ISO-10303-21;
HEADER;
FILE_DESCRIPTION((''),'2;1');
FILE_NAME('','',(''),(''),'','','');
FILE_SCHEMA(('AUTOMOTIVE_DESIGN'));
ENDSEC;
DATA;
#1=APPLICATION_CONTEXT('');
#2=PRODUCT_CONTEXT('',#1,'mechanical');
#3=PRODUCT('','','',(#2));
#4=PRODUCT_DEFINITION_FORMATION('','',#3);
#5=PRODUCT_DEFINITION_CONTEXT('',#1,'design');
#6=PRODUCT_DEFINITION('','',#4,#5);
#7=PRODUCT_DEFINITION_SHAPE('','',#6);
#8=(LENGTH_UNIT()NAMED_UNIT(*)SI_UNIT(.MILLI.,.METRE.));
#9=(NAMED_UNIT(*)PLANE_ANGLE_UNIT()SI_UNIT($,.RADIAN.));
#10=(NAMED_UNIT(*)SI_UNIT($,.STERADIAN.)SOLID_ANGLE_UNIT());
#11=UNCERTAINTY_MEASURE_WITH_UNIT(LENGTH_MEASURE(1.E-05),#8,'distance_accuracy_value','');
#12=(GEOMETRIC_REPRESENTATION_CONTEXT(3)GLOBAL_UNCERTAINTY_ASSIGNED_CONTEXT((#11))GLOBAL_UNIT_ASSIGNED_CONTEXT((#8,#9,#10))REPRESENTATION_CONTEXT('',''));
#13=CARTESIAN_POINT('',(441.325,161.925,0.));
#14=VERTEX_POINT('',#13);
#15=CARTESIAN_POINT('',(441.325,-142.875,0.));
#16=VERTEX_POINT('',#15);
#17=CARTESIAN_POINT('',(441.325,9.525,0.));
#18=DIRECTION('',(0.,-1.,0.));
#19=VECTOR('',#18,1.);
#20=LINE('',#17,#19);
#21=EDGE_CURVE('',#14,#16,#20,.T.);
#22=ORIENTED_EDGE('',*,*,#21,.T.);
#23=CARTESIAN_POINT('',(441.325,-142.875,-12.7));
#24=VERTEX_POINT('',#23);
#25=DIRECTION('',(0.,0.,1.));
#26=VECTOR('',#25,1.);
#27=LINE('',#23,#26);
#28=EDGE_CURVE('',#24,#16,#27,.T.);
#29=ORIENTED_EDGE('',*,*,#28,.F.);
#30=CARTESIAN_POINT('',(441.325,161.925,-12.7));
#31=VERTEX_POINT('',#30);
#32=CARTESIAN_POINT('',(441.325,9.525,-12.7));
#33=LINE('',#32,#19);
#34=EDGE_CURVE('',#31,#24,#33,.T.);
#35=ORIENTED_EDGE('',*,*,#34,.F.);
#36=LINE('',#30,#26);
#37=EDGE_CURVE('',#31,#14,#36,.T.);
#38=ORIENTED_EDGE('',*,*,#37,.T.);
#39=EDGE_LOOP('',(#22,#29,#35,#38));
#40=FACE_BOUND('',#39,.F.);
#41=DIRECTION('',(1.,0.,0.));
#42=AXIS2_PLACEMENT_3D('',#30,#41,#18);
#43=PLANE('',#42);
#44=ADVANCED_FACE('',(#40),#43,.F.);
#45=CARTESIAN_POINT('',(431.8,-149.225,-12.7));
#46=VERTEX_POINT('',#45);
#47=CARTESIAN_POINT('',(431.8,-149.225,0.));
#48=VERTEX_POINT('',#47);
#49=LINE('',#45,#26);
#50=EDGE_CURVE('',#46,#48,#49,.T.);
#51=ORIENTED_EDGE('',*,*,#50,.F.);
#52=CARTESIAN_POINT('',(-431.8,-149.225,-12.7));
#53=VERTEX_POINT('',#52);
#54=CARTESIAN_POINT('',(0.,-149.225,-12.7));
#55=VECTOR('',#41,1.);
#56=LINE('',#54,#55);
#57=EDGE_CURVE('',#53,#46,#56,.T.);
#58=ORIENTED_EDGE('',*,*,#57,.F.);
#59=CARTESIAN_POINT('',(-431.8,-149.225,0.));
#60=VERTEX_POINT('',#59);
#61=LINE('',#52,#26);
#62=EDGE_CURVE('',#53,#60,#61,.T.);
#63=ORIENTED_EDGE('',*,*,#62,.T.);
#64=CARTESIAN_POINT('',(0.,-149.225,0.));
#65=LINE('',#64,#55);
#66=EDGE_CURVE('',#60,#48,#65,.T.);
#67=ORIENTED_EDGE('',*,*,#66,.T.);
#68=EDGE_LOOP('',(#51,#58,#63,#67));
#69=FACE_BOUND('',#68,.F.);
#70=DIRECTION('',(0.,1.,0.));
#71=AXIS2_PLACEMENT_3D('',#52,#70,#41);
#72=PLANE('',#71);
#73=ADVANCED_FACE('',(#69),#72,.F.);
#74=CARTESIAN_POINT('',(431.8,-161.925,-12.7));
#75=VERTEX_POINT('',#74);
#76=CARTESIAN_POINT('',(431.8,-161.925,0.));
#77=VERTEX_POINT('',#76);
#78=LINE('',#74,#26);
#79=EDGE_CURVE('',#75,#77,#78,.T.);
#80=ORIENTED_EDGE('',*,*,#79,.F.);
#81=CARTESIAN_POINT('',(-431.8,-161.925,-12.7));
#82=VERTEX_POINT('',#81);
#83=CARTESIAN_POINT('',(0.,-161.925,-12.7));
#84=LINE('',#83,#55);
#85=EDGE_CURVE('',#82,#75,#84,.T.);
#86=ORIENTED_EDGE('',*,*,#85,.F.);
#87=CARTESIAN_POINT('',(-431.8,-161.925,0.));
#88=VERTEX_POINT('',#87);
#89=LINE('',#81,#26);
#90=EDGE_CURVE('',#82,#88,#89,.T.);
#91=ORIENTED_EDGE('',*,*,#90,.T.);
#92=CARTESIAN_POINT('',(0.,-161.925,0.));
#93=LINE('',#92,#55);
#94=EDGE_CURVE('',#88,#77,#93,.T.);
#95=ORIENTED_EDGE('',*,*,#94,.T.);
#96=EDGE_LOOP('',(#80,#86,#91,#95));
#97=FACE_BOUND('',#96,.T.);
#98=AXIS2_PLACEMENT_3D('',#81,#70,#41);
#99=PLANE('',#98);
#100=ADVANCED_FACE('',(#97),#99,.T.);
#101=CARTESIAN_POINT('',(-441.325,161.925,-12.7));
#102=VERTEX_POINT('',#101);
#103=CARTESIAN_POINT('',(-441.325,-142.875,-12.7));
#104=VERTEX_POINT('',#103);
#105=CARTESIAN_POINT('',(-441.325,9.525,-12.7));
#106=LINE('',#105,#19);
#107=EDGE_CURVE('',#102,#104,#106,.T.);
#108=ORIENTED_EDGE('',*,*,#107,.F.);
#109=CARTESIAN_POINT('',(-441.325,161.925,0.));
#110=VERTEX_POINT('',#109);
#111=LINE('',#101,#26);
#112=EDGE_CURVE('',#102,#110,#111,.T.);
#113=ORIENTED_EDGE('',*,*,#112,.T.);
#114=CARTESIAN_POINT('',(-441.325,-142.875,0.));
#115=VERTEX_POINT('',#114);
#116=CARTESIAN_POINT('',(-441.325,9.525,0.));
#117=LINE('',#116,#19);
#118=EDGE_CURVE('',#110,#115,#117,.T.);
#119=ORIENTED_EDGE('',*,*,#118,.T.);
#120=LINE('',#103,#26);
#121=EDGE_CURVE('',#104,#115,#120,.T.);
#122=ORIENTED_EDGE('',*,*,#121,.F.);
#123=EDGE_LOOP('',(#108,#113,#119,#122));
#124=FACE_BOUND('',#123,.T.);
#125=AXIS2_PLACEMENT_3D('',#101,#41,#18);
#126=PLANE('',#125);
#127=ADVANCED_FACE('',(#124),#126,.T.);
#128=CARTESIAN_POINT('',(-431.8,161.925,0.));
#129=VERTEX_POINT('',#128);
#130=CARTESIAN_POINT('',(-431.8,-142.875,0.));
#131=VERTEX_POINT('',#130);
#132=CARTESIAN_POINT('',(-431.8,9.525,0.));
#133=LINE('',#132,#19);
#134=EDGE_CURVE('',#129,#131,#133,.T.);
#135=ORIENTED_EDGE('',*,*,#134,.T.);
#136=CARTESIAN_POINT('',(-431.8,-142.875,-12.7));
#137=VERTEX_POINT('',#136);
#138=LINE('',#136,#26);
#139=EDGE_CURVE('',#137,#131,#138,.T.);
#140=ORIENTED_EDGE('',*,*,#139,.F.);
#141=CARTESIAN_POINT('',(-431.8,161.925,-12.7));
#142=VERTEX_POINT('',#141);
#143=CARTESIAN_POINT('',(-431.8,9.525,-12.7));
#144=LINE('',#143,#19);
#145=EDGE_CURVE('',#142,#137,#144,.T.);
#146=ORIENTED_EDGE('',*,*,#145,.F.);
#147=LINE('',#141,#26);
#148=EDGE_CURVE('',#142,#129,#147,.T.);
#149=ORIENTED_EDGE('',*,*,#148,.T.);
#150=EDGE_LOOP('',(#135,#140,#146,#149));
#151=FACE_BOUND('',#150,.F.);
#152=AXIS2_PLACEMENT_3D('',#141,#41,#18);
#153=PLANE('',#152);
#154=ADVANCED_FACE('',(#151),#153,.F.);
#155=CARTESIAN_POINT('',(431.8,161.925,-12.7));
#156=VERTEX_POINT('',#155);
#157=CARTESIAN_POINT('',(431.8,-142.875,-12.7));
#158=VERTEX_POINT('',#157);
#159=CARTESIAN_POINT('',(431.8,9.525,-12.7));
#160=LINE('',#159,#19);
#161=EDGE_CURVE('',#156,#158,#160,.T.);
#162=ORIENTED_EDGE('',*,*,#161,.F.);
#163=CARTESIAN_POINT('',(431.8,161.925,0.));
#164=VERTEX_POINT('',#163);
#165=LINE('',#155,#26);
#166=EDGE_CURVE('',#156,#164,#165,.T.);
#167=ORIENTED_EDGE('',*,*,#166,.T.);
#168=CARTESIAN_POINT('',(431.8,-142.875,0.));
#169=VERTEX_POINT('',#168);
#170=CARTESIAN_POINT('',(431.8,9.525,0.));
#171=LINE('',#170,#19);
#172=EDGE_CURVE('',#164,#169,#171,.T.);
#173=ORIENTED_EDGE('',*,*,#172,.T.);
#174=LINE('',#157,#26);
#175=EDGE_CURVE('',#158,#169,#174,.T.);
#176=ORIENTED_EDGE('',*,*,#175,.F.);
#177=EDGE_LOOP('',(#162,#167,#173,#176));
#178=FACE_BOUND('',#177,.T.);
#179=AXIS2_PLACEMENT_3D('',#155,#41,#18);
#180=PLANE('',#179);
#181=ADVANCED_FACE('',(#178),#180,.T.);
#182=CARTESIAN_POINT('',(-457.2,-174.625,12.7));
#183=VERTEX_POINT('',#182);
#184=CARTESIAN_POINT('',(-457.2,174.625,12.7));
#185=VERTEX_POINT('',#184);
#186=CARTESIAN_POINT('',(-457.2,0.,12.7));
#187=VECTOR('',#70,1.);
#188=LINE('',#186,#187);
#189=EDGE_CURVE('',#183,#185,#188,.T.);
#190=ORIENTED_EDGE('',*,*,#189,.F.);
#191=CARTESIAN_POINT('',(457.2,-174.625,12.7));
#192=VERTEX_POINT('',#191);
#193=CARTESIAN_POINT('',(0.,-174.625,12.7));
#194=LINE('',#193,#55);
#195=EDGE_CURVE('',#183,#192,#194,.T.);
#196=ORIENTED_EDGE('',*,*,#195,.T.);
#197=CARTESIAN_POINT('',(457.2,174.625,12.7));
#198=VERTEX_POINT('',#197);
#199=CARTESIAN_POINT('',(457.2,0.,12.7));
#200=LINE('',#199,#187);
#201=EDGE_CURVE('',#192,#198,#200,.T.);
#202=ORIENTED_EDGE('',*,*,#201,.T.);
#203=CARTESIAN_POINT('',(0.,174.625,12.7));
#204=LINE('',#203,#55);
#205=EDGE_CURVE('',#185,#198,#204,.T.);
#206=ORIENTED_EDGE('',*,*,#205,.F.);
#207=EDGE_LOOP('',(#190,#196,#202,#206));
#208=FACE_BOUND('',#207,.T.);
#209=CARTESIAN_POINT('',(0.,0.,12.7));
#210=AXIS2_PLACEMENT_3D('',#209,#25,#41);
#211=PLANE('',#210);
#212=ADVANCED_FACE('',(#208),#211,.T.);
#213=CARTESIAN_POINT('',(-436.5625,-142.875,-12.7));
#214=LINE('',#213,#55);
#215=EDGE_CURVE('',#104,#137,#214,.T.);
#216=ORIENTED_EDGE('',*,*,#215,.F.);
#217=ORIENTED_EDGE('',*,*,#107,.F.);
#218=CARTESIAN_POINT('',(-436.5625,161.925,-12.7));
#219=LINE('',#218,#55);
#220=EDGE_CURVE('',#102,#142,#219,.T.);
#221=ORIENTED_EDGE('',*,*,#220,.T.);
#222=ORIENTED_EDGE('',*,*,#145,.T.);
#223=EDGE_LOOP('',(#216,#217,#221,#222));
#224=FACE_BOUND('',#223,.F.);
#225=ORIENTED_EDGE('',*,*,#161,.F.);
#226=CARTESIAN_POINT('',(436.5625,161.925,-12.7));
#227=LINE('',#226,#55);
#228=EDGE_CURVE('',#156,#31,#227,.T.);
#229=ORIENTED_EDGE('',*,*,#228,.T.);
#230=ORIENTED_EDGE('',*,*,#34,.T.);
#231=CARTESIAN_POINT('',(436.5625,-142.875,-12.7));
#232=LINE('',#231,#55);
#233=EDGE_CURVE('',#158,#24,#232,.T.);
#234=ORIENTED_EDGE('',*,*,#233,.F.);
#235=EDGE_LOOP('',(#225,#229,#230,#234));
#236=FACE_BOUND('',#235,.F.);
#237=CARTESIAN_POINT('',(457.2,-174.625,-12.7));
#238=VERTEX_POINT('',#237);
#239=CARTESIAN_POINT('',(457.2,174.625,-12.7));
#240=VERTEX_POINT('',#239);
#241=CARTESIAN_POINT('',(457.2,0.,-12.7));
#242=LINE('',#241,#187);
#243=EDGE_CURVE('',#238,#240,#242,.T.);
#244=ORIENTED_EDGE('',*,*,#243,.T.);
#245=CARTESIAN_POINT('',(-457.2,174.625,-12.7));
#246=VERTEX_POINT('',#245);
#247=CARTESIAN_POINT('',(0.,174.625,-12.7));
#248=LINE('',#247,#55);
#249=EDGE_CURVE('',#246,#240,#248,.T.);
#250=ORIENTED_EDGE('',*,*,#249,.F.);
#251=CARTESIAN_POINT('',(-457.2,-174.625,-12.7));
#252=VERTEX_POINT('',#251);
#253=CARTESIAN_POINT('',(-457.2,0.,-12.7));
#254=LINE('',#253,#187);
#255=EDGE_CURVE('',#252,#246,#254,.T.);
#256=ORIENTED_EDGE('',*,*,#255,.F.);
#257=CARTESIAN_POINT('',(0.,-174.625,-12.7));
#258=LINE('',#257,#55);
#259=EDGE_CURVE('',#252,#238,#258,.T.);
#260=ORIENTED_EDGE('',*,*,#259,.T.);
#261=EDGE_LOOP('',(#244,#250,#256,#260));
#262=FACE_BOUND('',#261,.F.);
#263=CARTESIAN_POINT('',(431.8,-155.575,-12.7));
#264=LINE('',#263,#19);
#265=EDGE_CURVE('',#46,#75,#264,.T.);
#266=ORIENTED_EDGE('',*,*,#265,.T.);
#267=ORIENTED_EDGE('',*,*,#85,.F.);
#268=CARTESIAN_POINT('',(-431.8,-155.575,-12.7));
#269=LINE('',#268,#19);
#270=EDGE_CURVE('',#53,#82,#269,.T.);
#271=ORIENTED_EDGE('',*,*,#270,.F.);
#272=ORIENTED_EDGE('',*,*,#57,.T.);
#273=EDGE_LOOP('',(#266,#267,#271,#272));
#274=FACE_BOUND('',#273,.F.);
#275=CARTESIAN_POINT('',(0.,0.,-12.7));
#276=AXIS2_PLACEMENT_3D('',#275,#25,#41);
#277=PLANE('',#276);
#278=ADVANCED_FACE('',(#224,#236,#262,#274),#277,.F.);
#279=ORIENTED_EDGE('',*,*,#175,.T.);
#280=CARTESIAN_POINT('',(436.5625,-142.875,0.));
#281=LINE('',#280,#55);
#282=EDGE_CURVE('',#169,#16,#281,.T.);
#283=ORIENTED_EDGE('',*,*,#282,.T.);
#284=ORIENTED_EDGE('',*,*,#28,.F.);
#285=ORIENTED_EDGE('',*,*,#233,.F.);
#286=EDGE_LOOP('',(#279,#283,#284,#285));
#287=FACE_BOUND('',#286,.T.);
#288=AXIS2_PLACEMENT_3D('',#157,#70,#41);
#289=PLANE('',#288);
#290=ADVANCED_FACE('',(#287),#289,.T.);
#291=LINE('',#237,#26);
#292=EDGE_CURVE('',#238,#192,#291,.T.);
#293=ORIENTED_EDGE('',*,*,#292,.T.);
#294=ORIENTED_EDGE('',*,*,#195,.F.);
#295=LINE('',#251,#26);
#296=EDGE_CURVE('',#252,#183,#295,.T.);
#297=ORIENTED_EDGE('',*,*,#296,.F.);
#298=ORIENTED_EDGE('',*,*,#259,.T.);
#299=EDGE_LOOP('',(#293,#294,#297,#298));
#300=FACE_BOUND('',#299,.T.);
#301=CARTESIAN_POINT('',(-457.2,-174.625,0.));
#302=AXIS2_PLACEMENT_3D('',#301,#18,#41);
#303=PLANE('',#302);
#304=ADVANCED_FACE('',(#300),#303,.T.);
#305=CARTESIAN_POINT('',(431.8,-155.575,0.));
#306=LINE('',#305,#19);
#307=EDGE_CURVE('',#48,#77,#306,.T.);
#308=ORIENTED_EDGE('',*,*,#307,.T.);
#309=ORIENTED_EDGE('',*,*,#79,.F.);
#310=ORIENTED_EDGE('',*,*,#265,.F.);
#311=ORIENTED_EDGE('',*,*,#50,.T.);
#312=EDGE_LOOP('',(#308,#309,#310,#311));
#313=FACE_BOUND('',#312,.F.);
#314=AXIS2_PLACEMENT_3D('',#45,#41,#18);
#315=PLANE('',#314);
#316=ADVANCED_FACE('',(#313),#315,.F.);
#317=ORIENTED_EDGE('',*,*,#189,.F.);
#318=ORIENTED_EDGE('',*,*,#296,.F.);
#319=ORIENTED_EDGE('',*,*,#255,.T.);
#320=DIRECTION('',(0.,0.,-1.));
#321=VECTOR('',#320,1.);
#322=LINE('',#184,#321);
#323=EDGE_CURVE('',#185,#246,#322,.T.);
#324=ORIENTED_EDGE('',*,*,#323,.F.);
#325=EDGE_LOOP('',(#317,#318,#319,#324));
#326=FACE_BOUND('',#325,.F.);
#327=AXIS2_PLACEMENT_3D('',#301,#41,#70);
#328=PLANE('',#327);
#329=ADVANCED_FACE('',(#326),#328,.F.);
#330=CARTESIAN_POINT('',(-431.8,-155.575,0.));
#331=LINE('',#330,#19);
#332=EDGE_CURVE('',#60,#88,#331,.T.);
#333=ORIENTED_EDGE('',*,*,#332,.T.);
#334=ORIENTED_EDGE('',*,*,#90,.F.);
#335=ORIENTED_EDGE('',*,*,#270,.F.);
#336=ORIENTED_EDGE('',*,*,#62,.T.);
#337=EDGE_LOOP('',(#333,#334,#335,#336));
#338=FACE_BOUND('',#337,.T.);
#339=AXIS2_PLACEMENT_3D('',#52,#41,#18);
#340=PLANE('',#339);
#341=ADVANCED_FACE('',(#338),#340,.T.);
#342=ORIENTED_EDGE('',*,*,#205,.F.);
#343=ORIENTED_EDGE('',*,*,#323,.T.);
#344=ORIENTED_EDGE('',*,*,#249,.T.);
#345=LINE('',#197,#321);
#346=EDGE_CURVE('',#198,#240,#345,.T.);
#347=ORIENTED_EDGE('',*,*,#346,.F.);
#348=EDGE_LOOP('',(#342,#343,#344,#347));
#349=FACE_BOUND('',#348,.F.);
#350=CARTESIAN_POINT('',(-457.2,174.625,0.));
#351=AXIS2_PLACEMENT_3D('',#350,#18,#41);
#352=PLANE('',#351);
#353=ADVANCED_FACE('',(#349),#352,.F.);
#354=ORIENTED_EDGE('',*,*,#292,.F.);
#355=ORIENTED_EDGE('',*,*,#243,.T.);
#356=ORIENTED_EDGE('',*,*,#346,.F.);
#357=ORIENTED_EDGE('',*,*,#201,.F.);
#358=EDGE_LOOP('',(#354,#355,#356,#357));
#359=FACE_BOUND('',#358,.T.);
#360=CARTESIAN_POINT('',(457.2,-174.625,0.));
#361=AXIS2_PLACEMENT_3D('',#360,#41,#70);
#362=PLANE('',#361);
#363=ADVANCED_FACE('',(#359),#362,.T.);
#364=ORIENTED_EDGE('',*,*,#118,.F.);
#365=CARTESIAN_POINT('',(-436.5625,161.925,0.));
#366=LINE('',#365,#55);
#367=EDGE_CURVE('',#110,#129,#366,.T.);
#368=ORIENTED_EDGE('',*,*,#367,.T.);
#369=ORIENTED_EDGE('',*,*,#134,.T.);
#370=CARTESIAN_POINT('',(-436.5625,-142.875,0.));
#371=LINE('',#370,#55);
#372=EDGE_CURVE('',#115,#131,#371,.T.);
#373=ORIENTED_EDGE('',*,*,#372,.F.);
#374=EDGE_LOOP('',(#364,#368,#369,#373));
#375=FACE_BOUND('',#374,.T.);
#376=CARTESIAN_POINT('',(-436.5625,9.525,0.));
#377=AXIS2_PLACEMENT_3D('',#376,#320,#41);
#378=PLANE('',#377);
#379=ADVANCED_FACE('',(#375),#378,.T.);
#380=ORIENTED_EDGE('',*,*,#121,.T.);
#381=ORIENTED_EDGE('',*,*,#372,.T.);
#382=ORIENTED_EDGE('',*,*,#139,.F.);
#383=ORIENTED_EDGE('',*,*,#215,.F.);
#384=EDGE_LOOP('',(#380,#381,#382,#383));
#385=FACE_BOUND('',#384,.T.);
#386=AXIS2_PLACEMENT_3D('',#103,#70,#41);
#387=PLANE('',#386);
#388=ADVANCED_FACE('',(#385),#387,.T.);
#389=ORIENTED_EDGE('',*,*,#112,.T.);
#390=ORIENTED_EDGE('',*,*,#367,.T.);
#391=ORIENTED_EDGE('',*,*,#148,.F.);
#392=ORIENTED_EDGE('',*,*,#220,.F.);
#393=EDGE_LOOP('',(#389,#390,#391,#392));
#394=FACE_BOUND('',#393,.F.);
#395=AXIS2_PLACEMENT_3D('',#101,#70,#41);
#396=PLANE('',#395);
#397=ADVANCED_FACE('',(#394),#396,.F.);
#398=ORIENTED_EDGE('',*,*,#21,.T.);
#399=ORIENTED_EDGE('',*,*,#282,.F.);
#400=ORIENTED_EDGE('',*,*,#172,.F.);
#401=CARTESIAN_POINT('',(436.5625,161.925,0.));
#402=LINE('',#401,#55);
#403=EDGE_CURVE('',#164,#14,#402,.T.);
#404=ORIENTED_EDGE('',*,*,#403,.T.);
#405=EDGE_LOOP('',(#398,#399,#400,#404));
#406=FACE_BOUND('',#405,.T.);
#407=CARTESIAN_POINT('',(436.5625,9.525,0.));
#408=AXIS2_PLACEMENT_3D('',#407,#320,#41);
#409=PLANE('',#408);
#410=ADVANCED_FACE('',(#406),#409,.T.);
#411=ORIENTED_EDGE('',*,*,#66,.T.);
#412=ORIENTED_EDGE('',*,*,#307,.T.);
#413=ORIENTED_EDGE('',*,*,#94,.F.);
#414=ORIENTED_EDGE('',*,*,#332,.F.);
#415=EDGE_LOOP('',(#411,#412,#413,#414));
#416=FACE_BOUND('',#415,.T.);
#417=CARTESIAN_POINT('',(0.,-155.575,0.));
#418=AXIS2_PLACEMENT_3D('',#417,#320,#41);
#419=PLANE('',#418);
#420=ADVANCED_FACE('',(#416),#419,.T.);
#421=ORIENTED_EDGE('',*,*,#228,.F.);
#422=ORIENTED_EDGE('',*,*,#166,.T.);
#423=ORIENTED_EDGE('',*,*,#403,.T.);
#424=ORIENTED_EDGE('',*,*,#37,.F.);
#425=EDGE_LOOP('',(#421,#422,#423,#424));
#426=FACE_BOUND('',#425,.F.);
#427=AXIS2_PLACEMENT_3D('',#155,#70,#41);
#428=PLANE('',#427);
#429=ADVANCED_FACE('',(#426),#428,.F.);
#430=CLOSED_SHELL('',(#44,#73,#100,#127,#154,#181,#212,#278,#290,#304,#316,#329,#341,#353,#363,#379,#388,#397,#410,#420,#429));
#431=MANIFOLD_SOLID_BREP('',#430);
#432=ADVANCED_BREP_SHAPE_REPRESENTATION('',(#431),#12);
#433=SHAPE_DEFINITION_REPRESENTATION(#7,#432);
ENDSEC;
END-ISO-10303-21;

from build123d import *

# Parameters (mm, degrees)
F0_W     = 914.4
F0_H     = 349.25
F1_DEPTH = 12.7
F2_W     = 863.6
F2_H     = 12.7
F3_DEPTH = 12.7
F4_W     = 9.525
F4_H     = 304.8
F5_DEPTH = 12.7


# Not quite as in the source:
# - a feature names something its author has since deleted; it is built from what else it names


with BuildPart() as f1:
    # F0 (on Top) → F1 (new body, symmetric)
    with BuildSketch(Plane.XY):
        Rectangle(F0_W, F0_H)
    extrude(amount=F1_DEPTH, both=True)

    # F2 (on face) → F3 (cut)
    with BuildSketch(Plane(origin=(0, 0, -12.7), x_dir=(1, 0, 0), z_dir=(0, 0, -1))):
        with Locations((0, 155.575)):
            Rectangle(F2_W, F2_H)
    extrude(amount=-F3_DEPTH, mode=Mode.SUBTRACT)

    # F4 (on face) → F5 (cut)
    with BuildSketch(Plane(origin=(0, 0, -12.7), x_dir=(1, 0, 0), z_dir=(0, 0, -1))):
        with Locations((-436.5625, -9.525)):
            Rectangle(F4_W, F4_H)
        with Locations((436.5625, -9.525)):
            Rectangle(F4_W, F4_H)
    extrude(amount=-F5_DEPTH, mode=Mode.SUBTRACT)


solid = f1.part
